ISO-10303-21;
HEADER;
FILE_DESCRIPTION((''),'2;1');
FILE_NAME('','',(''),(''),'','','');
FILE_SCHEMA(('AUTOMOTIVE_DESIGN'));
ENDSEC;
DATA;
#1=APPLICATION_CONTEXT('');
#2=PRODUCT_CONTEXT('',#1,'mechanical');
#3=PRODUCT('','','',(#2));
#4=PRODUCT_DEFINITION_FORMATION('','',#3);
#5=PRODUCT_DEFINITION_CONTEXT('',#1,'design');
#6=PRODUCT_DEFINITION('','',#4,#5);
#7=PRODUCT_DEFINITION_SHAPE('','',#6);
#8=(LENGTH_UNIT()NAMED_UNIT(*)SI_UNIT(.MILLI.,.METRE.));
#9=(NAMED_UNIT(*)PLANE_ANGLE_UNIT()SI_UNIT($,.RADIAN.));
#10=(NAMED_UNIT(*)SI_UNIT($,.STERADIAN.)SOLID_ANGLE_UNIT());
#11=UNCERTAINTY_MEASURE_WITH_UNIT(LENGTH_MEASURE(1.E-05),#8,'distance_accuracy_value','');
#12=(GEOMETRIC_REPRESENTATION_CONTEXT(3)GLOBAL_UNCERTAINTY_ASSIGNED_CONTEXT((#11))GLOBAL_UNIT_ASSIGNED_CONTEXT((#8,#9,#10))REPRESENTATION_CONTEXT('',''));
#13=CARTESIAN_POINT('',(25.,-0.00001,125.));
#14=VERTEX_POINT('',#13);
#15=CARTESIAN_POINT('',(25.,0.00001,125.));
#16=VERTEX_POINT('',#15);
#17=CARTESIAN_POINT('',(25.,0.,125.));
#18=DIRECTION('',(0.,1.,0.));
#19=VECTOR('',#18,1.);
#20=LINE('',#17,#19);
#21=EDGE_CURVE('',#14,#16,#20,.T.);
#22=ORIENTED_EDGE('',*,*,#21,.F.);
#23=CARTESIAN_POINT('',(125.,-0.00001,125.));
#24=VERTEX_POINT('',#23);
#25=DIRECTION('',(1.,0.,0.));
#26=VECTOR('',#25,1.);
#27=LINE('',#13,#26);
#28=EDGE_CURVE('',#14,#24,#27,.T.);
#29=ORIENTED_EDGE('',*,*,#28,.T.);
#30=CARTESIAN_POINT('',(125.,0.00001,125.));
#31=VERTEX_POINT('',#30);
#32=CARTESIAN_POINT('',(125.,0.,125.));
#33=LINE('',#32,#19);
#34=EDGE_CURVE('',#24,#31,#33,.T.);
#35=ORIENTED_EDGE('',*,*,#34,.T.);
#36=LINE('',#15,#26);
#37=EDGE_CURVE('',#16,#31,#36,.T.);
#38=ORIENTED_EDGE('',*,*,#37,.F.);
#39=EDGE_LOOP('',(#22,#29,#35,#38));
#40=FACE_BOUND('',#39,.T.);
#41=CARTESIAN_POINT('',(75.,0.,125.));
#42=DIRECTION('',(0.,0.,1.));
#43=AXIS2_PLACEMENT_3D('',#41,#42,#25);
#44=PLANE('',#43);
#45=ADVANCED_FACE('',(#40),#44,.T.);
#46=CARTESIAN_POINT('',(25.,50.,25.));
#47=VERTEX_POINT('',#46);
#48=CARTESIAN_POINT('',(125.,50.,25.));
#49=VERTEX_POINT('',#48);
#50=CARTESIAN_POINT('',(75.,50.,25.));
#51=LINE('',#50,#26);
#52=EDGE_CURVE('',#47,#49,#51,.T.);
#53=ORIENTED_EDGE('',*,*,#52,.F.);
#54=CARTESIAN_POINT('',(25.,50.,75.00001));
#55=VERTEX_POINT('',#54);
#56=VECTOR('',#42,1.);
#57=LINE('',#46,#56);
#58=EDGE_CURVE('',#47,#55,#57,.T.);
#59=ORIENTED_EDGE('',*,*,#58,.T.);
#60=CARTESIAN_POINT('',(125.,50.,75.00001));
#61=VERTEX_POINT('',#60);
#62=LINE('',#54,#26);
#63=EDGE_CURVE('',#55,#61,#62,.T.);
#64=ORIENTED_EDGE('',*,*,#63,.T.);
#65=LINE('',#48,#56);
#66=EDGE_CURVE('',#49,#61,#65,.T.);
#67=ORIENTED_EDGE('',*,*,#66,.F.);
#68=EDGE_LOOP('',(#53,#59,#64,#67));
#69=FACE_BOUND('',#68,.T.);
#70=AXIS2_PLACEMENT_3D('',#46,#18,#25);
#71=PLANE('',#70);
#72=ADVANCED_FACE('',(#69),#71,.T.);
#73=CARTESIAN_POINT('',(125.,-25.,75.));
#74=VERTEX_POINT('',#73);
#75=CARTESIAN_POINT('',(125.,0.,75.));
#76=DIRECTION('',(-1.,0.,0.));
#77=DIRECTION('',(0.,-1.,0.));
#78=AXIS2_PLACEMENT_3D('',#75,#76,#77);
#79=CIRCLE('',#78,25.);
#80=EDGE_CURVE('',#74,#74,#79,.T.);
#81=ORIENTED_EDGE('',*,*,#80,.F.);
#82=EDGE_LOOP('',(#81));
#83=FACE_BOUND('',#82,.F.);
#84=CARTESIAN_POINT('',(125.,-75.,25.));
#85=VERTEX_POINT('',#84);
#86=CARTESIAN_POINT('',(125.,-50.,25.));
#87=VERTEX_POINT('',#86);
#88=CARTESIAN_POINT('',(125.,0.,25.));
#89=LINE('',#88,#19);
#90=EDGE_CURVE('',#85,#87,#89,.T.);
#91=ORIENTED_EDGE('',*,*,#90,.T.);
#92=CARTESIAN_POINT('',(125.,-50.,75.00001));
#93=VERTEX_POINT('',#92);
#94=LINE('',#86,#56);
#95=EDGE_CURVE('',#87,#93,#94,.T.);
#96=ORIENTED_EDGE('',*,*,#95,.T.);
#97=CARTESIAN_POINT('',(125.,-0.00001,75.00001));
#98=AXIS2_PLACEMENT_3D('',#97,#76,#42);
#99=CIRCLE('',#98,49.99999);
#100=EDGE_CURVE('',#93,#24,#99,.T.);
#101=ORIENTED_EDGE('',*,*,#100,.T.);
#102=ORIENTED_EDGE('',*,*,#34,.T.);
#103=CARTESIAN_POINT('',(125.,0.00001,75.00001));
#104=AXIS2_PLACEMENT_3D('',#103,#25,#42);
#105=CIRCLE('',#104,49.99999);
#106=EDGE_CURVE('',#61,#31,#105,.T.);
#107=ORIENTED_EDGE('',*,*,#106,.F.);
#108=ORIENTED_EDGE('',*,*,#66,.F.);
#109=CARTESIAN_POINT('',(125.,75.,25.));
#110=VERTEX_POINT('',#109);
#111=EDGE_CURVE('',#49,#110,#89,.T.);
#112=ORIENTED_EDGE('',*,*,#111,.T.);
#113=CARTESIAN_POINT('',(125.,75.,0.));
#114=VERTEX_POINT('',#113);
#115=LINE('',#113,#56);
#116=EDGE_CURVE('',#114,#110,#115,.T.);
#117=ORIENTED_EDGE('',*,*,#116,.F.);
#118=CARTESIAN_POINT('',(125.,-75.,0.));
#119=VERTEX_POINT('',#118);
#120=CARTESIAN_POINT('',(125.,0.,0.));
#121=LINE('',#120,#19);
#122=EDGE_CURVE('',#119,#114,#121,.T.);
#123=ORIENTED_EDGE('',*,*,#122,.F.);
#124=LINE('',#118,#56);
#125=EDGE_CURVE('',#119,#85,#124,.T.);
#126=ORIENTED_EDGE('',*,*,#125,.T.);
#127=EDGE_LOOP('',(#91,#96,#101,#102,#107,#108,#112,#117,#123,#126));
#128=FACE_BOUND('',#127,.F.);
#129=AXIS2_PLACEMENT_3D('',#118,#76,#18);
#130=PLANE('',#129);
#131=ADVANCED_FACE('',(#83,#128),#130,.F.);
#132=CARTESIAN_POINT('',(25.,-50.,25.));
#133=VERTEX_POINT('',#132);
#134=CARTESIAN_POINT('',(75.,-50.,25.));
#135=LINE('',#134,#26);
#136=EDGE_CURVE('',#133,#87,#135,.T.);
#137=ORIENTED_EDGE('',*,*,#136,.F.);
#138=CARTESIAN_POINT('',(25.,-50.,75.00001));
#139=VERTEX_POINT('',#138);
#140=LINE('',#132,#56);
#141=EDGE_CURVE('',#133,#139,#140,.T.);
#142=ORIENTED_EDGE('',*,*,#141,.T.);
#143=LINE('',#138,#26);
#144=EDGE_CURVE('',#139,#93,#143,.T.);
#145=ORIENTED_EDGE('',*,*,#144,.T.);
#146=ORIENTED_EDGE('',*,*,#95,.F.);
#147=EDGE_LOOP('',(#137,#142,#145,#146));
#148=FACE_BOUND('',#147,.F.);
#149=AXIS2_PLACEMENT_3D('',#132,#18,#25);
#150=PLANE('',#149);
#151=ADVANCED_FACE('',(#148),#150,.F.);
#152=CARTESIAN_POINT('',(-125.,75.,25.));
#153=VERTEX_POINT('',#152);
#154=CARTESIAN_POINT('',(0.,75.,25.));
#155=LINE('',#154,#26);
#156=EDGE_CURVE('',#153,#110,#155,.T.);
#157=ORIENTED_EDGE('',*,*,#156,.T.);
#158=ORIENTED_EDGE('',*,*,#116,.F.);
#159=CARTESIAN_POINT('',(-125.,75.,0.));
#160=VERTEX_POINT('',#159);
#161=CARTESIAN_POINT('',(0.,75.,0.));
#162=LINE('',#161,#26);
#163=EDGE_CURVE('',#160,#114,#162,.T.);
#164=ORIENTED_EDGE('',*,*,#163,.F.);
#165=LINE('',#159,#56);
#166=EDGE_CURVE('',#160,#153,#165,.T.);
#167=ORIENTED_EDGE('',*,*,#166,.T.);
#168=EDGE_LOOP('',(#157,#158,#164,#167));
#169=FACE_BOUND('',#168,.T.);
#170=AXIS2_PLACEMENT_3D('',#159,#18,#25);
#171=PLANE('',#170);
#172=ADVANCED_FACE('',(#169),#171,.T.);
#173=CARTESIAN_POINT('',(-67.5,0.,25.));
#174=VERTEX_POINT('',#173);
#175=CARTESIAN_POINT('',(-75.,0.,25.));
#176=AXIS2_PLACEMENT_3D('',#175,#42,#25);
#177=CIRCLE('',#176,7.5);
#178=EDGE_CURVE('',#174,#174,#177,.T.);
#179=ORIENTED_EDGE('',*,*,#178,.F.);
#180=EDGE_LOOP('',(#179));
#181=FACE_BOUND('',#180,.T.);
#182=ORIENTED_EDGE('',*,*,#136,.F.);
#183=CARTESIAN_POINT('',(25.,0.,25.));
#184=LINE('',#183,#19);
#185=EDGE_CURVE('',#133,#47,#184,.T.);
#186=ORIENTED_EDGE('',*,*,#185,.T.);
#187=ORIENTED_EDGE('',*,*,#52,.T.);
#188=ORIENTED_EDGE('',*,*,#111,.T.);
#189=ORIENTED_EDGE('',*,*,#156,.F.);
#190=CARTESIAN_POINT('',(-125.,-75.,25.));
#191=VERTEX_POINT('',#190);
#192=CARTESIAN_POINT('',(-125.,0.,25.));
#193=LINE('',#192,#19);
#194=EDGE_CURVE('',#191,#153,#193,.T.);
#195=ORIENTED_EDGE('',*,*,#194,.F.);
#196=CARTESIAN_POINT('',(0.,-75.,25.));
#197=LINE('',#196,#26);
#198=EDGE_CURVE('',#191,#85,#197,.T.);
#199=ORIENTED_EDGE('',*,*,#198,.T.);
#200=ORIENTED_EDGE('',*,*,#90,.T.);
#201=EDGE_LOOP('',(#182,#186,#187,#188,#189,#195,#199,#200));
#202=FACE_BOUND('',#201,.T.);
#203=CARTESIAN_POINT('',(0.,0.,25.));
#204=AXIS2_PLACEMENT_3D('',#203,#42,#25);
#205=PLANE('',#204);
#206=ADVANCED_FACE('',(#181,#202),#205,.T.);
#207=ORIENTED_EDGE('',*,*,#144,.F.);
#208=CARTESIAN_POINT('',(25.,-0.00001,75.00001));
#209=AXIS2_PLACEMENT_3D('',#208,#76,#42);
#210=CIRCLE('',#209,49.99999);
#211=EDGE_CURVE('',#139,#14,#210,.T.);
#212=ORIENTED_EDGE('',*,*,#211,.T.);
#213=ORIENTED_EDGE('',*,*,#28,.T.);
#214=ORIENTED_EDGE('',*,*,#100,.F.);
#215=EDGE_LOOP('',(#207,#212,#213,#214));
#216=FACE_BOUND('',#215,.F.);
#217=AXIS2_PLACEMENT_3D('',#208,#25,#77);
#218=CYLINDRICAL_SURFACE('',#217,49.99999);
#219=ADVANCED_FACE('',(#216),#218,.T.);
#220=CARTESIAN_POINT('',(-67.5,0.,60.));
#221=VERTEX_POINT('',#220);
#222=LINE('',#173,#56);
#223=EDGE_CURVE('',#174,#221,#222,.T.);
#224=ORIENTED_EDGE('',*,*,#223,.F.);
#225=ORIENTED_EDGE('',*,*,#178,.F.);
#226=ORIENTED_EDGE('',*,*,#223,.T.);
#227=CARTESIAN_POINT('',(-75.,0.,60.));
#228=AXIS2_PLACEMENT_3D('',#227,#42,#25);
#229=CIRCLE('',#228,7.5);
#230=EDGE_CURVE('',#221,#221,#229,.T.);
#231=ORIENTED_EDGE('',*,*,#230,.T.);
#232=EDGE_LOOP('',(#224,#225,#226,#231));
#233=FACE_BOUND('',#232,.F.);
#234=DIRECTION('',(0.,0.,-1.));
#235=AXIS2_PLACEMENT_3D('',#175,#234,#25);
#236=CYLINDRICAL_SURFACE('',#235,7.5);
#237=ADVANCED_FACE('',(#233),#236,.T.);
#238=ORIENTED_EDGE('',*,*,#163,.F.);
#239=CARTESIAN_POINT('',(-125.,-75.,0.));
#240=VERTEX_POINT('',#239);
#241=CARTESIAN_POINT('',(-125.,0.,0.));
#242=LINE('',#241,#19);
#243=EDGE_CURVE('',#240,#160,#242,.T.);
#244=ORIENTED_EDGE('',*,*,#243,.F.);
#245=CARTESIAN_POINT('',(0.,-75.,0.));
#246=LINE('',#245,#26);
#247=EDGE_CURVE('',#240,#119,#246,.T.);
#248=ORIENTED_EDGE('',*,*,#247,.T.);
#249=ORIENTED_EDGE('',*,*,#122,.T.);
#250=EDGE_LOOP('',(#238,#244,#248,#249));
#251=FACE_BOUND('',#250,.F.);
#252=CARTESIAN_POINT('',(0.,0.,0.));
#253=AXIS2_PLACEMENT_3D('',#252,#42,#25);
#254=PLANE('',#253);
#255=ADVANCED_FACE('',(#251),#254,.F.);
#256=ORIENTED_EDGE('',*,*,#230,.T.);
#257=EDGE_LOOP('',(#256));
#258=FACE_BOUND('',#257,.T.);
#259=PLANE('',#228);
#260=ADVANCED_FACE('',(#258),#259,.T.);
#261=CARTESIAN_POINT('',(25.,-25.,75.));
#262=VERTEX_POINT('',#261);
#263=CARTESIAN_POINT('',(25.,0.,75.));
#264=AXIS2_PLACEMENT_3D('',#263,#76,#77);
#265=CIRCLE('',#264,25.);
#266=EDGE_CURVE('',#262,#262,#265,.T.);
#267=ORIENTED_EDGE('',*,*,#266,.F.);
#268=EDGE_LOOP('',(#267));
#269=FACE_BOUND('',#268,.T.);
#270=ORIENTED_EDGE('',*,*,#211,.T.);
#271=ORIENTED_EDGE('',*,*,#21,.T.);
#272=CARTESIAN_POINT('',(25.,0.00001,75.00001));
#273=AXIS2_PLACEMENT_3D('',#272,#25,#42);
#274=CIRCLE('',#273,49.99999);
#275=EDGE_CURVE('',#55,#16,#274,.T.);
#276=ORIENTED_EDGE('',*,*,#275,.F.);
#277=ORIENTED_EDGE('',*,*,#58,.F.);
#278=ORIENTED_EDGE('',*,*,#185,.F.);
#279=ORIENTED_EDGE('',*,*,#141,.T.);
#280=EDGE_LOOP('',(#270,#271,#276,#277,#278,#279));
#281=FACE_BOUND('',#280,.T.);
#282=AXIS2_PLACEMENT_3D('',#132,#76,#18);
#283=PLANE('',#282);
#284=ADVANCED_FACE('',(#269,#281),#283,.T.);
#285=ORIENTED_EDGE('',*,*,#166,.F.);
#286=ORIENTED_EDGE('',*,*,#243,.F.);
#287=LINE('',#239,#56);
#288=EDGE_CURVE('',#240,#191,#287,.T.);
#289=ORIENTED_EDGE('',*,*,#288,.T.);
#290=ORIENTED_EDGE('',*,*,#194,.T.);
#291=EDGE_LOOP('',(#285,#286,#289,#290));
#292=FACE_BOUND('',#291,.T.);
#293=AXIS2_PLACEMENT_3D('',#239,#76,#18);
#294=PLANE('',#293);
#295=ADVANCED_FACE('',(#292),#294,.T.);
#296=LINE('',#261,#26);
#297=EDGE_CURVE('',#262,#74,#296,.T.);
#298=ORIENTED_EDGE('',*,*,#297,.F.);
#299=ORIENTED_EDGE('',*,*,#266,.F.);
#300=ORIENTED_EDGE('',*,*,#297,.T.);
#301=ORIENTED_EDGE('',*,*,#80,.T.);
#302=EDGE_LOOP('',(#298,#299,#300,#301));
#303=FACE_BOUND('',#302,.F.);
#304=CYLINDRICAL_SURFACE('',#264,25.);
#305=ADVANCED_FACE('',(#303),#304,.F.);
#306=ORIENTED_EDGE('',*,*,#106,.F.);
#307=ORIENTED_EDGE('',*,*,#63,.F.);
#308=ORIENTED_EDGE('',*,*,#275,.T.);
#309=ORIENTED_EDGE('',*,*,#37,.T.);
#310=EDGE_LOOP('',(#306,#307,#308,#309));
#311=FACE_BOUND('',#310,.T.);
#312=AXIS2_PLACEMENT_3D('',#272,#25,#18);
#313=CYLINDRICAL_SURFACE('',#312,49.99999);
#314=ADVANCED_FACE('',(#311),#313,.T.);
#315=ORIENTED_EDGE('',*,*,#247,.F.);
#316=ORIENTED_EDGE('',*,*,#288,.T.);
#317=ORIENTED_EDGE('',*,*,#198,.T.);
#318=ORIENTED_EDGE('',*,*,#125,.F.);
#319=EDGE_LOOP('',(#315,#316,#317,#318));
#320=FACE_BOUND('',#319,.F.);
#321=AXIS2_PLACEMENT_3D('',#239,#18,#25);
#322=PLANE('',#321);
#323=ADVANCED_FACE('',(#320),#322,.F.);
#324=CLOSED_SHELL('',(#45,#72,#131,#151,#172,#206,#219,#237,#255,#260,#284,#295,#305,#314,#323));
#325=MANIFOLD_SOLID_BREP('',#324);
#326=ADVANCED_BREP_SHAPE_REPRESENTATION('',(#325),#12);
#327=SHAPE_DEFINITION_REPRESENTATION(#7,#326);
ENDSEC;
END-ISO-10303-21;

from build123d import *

# Parameters (mm, degrees)
F0_W     = 250
F0_H     = 150
F7_DEPTH = 25
F1_R     = 7.5
F2_DEPTH = 35
F3_W     = 100
F3_H     = 100
F4_DEPTH = 100
F5_R     = 25
F8_DEPTH = 100.001
F6_R     = 49.99999


# Not quite as in the source:
# - a fillet or chamfer is up to 0.001 mm smaller than in the source, because OpenCascade refuses the exact size


with BuildPart() as f7:
    # F0 (on Top) → F7 (new body)
    with BuildSketch(Plane.XY):
        Rectangle(F0_W, F0_H)
    extrude(amount=F7_DEPTH)

    # F1 (on face) → F2 (join)
    with BuildSketch(Plane.XY.offset(25)):
        with Locations((-75, 0)):
            Circle(F1_R)
    extrude(amount=F2_DEPTH)

    # F3 (on face) → F4 (join)
    with BuildSketch(Plane.XY.offset(25)):
        with Locations((75, 0)):
            Rectangle(F3_W, F3_H)
    extrude(amount=F4_DEPTH)

    # F5 (on face) → F8 (cut, through all)
    with BuildSketch(Plane(origin=(25, 0, 0), x_dir=(0, -1, 0), z_dir=(-1, 0, 0))):
        with Locations((0, 75)):
            Circle(F5_R)
    extrude(amount=-F8_DEPTH, mode=Mode.SUBTRACT)

    # F6 (radius 50 in the source; OpenCascade refuses exactly that, so slightly less here)
    f6_edges = [f7.edges().sort_by_distance(p)[0] for p in [
        (75, 50, 125),
        (75, -50, 125),
    ]]
    fillet(f6_edges, radius=F6_R)


solid = f7.part
